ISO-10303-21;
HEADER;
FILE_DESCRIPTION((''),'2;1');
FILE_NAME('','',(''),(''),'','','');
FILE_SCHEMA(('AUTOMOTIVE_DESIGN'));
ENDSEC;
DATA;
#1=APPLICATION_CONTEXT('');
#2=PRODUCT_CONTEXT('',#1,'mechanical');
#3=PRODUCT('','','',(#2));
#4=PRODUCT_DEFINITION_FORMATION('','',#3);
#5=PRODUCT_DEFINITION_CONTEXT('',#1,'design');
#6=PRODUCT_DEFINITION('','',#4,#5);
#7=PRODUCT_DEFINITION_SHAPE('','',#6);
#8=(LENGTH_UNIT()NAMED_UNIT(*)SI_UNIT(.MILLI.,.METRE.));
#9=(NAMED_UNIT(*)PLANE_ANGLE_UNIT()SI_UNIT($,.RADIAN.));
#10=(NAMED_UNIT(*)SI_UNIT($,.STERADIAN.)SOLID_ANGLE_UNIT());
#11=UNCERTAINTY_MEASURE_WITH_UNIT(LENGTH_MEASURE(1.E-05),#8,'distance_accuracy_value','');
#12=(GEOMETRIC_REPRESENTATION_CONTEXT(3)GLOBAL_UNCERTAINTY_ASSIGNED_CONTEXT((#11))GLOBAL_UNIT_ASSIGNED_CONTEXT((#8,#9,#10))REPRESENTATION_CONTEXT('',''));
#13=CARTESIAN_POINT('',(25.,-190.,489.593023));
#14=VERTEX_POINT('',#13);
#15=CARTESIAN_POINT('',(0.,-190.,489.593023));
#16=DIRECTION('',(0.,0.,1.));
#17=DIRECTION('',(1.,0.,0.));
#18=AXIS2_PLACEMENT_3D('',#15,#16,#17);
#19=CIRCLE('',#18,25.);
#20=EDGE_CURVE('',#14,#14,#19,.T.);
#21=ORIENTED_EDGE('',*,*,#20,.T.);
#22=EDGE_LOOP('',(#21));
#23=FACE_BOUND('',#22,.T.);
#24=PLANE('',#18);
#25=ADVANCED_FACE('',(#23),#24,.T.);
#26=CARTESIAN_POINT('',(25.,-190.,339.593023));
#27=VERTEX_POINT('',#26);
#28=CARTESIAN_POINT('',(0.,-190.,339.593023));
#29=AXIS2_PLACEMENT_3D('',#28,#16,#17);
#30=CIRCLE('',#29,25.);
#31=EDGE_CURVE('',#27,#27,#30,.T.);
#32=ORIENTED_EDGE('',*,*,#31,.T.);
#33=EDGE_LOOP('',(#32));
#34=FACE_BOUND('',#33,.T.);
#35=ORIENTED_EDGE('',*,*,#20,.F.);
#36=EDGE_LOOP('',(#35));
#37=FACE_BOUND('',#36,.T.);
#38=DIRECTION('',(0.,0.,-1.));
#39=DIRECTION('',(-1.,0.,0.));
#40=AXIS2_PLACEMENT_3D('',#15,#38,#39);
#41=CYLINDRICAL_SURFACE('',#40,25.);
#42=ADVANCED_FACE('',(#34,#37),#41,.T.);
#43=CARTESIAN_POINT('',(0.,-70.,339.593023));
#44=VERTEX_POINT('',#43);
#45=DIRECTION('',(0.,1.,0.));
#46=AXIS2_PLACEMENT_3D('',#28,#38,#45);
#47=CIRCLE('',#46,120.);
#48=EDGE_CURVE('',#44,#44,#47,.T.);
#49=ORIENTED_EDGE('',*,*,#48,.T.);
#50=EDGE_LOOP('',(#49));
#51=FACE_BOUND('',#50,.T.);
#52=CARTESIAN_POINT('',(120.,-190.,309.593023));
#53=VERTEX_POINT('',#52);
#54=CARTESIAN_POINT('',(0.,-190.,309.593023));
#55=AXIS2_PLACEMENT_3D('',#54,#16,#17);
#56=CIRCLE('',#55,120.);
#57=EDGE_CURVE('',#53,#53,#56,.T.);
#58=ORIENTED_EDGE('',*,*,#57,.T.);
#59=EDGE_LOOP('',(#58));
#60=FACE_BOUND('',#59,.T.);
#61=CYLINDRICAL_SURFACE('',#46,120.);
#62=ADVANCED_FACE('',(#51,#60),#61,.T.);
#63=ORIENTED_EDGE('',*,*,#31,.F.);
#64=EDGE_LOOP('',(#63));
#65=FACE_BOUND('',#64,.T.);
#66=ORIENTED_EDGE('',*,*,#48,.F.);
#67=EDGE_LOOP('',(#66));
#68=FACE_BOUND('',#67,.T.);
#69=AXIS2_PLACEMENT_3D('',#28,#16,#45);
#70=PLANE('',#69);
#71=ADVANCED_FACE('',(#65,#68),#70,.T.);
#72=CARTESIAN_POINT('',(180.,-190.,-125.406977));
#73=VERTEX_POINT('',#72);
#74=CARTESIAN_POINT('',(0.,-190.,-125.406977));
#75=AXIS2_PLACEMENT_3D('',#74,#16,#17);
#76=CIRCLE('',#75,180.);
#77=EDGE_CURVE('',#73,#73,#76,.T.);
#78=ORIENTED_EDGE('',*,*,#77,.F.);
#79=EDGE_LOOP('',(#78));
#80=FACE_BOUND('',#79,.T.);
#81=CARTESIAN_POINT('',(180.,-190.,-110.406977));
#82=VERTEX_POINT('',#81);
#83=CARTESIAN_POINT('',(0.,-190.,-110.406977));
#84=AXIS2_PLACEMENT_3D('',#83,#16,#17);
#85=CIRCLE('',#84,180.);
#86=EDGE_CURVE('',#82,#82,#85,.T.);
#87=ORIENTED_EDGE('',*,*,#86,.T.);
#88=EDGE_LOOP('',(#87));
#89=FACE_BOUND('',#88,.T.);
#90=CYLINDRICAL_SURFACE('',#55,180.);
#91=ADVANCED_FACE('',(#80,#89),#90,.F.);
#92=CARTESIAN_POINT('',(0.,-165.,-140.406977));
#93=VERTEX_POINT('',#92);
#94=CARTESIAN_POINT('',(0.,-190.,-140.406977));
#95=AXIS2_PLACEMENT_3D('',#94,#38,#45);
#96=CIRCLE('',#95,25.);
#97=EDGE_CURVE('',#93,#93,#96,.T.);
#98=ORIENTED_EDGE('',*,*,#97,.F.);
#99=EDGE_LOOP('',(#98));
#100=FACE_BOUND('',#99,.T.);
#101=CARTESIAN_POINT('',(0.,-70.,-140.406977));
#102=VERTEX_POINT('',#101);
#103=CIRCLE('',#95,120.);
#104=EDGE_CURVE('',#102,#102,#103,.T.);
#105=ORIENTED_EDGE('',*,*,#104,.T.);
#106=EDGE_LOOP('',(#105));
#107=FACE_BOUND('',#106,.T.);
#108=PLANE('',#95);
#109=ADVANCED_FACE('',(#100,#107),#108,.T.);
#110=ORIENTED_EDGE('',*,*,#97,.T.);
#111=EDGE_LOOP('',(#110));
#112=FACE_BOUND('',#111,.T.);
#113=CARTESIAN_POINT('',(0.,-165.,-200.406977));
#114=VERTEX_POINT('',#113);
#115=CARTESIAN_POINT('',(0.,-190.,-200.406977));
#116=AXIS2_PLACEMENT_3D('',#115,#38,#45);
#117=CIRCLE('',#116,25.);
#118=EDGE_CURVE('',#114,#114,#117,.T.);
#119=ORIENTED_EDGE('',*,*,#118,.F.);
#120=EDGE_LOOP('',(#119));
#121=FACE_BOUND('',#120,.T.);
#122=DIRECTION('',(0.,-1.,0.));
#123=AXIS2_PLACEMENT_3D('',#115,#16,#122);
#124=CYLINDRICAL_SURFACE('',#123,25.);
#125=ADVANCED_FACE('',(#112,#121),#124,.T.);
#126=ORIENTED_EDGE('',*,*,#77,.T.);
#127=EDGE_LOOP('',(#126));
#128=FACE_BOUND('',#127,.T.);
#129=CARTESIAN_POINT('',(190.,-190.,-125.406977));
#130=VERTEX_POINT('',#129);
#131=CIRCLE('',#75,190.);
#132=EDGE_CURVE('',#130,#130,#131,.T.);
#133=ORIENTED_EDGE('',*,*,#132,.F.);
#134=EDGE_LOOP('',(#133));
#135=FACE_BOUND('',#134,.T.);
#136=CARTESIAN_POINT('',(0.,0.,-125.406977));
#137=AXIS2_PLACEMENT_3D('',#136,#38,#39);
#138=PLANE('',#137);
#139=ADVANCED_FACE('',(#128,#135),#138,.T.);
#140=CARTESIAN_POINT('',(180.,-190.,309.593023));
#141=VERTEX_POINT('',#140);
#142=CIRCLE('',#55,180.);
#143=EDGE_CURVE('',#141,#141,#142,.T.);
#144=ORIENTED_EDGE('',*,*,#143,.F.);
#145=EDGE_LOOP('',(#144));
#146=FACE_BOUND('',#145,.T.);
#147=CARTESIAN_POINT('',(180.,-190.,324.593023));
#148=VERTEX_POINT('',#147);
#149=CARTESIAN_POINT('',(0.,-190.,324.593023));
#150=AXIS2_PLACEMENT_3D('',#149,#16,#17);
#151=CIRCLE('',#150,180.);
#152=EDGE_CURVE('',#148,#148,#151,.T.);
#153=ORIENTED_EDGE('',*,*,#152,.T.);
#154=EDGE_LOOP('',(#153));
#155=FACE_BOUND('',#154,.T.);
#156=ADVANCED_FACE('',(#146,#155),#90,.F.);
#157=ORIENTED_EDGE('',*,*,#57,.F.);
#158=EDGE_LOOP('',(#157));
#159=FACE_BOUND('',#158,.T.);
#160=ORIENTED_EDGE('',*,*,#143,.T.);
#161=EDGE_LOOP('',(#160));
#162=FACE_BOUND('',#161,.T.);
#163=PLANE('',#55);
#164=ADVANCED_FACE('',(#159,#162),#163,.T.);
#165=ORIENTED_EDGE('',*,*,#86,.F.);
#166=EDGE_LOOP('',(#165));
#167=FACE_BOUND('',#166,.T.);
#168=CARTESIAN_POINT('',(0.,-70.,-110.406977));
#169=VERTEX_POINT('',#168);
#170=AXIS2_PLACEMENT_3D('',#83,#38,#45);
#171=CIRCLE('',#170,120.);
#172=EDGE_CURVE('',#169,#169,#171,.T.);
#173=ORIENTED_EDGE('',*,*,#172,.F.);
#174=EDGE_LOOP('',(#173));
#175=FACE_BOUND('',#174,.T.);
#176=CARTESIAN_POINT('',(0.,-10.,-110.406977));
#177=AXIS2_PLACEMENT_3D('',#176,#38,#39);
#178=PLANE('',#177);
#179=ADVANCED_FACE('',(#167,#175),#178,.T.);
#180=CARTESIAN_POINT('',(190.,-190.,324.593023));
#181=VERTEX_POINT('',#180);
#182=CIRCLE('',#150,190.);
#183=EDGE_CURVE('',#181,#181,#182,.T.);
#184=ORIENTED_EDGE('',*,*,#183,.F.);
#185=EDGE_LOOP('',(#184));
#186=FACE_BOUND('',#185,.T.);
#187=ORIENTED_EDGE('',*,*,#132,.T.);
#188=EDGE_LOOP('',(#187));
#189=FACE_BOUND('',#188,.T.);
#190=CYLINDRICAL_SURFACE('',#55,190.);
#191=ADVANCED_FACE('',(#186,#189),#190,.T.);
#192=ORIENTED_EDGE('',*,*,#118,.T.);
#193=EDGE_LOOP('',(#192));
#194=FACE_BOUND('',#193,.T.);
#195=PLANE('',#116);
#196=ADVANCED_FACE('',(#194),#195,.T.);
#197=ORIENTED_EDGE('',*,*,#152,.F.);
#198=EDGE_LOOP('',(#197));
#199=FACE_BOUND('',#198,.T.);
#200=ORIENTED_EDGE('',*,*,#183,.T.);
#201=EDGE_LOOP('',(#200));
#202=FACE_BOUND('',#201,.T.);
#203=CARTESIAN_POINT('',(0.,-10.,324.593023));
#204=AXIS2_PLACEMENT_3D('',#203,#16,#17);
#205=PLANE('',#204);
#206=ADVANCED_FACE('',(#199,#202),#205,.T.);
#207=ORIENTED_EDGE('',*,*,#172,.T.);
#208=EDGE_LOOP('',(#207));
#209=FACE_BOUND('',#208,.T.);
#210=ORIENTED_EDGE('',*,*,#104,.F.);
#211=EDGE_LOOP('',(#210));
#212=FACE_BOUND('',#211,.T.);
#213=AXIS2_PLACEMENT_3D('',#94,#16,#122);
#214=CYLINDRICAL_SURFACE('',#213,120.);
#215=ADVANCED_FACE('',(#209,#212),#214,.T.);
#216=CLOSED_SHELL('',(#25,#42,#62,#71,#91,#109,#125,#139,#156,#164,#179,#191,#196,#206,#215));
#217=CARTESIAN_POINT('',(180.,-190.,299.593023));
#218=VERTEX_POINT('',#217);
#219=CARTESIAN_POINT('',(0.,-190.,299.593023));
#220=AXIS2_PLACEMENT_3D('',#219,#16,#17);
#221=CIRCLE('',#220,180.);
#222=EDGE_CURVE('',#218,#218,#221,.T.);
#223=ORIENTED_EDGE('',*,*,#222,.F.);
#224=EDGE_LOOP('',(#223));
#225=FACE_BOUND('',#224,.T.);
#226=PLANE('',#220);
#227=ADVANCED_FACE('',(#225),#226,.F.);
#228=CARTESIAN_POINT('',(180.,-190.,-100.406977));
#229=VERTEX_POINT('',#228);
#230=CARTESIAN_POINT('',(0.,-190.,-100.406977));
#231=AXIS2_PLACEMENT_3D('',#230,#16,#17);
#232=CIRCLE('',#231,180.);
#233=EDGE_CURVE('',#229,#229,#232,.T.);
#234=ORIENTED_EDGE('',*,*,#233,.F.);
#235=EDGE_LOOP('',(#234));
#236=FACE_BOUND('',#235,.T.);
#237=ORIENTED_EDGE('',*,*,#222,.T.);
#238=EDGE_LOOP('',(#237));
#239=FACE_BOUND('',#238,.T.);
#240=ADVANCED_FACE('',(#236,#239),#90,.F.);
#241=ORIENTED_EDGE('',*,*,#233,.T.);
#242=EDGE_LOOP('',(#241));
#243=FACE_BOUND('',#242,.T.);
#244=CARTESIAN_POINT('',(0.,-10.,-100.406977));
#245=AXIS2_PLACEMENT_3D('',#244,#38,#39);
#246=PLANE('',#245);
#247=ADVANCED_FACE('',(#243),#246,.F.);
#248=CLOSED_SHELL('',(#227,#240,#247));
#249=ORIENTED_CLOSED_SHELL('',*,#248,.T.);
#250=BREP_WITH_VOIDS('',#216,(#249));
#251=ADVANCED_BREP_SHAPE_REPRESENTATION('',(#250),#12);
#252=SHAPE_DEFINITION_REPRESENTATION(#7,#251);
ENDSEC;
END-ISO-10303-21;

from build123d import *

# Parameters (mm, degrees)
SKETCH7_R           = 120
BOSS_EXTRUDE1_DEPTH = 30
SKETCH8_R           = 25
BOSS_EXTRUDE2_DEPTH = 60
BOSS_EXTRUDE3_START = 150
SKETCH11_R          = 25
BOSS_EXTRUDE3_DEPTH = 150


# Read off the part's stored shape, not the designer's step: Revolve-Thin1
with BuildPart() as part:
    # Revolve-Thin1 outline → Revolve-Thin1 (revolve)
    with BuildSketch(Plane.XZ.offset(190)):
        Polygon((180, 309.593023256), (0, 309.593023256), (0, 299.593023256), (180, 299.593023256), (180, -100.406976744), (0, -100.406976744), (0, -110.406976744), (180, -110.406976744), (180, -125.406976744), (190, -125.406976744), (190, 324.593023256), (180, 324.593023256), align=None)
    revolve(axis=Axis((0, -190, 0), (0, 0, 1)))

    # Sketch7 → Boss-Extrude1 (add)
    with BuildSketch(Plane(origin=(0, 0, -110.406976744), x_dir=(-1, 0, 0), z_dir=(0, 0, -1))):
        with Locations(Location((0, -190, 0), (0, 0, 90))):
            Circle(SKETCH7_R)
    boss_extrude1 = extrude(amount=BOSS_EXTRUDE1_DEPTH)

    # Mirror1: Boss-Extrude1 across plane
    add(boss_extrude1.mirror(Plane(origin=(0, 0, 99.593023256), x_dir=(1, 0, 0), z_dir=(0, 0, -1))))

    # Sketch8 → Boss-Extrude2 (add)
    with BuildSketch(Plane(origin=(0, 0, -140.406976744), x_dir=(-1, 0, 0), z_dir=(0, 0, -1))):
        with Locations(Location((0, -190, 0), (0, 0, 90))):
            Circle(SKETCH8_R)
    extrude(amount=BOSS_EXTRUDE2_DEPTH)

    # Sketch11 → Boss-Extrude3 (add)
    with BuildSketch(Plane.XY.offset(339.593023256).offset(BOSS_EXTRUDE3_START)):
        with Locations(Location((0, -190, 0), (0, 0, 90))):
            Circle(SKETCH11_R)
    extrude(amount=-BOSS_EXTRUDE3_DEPTH)


solid = part.part
